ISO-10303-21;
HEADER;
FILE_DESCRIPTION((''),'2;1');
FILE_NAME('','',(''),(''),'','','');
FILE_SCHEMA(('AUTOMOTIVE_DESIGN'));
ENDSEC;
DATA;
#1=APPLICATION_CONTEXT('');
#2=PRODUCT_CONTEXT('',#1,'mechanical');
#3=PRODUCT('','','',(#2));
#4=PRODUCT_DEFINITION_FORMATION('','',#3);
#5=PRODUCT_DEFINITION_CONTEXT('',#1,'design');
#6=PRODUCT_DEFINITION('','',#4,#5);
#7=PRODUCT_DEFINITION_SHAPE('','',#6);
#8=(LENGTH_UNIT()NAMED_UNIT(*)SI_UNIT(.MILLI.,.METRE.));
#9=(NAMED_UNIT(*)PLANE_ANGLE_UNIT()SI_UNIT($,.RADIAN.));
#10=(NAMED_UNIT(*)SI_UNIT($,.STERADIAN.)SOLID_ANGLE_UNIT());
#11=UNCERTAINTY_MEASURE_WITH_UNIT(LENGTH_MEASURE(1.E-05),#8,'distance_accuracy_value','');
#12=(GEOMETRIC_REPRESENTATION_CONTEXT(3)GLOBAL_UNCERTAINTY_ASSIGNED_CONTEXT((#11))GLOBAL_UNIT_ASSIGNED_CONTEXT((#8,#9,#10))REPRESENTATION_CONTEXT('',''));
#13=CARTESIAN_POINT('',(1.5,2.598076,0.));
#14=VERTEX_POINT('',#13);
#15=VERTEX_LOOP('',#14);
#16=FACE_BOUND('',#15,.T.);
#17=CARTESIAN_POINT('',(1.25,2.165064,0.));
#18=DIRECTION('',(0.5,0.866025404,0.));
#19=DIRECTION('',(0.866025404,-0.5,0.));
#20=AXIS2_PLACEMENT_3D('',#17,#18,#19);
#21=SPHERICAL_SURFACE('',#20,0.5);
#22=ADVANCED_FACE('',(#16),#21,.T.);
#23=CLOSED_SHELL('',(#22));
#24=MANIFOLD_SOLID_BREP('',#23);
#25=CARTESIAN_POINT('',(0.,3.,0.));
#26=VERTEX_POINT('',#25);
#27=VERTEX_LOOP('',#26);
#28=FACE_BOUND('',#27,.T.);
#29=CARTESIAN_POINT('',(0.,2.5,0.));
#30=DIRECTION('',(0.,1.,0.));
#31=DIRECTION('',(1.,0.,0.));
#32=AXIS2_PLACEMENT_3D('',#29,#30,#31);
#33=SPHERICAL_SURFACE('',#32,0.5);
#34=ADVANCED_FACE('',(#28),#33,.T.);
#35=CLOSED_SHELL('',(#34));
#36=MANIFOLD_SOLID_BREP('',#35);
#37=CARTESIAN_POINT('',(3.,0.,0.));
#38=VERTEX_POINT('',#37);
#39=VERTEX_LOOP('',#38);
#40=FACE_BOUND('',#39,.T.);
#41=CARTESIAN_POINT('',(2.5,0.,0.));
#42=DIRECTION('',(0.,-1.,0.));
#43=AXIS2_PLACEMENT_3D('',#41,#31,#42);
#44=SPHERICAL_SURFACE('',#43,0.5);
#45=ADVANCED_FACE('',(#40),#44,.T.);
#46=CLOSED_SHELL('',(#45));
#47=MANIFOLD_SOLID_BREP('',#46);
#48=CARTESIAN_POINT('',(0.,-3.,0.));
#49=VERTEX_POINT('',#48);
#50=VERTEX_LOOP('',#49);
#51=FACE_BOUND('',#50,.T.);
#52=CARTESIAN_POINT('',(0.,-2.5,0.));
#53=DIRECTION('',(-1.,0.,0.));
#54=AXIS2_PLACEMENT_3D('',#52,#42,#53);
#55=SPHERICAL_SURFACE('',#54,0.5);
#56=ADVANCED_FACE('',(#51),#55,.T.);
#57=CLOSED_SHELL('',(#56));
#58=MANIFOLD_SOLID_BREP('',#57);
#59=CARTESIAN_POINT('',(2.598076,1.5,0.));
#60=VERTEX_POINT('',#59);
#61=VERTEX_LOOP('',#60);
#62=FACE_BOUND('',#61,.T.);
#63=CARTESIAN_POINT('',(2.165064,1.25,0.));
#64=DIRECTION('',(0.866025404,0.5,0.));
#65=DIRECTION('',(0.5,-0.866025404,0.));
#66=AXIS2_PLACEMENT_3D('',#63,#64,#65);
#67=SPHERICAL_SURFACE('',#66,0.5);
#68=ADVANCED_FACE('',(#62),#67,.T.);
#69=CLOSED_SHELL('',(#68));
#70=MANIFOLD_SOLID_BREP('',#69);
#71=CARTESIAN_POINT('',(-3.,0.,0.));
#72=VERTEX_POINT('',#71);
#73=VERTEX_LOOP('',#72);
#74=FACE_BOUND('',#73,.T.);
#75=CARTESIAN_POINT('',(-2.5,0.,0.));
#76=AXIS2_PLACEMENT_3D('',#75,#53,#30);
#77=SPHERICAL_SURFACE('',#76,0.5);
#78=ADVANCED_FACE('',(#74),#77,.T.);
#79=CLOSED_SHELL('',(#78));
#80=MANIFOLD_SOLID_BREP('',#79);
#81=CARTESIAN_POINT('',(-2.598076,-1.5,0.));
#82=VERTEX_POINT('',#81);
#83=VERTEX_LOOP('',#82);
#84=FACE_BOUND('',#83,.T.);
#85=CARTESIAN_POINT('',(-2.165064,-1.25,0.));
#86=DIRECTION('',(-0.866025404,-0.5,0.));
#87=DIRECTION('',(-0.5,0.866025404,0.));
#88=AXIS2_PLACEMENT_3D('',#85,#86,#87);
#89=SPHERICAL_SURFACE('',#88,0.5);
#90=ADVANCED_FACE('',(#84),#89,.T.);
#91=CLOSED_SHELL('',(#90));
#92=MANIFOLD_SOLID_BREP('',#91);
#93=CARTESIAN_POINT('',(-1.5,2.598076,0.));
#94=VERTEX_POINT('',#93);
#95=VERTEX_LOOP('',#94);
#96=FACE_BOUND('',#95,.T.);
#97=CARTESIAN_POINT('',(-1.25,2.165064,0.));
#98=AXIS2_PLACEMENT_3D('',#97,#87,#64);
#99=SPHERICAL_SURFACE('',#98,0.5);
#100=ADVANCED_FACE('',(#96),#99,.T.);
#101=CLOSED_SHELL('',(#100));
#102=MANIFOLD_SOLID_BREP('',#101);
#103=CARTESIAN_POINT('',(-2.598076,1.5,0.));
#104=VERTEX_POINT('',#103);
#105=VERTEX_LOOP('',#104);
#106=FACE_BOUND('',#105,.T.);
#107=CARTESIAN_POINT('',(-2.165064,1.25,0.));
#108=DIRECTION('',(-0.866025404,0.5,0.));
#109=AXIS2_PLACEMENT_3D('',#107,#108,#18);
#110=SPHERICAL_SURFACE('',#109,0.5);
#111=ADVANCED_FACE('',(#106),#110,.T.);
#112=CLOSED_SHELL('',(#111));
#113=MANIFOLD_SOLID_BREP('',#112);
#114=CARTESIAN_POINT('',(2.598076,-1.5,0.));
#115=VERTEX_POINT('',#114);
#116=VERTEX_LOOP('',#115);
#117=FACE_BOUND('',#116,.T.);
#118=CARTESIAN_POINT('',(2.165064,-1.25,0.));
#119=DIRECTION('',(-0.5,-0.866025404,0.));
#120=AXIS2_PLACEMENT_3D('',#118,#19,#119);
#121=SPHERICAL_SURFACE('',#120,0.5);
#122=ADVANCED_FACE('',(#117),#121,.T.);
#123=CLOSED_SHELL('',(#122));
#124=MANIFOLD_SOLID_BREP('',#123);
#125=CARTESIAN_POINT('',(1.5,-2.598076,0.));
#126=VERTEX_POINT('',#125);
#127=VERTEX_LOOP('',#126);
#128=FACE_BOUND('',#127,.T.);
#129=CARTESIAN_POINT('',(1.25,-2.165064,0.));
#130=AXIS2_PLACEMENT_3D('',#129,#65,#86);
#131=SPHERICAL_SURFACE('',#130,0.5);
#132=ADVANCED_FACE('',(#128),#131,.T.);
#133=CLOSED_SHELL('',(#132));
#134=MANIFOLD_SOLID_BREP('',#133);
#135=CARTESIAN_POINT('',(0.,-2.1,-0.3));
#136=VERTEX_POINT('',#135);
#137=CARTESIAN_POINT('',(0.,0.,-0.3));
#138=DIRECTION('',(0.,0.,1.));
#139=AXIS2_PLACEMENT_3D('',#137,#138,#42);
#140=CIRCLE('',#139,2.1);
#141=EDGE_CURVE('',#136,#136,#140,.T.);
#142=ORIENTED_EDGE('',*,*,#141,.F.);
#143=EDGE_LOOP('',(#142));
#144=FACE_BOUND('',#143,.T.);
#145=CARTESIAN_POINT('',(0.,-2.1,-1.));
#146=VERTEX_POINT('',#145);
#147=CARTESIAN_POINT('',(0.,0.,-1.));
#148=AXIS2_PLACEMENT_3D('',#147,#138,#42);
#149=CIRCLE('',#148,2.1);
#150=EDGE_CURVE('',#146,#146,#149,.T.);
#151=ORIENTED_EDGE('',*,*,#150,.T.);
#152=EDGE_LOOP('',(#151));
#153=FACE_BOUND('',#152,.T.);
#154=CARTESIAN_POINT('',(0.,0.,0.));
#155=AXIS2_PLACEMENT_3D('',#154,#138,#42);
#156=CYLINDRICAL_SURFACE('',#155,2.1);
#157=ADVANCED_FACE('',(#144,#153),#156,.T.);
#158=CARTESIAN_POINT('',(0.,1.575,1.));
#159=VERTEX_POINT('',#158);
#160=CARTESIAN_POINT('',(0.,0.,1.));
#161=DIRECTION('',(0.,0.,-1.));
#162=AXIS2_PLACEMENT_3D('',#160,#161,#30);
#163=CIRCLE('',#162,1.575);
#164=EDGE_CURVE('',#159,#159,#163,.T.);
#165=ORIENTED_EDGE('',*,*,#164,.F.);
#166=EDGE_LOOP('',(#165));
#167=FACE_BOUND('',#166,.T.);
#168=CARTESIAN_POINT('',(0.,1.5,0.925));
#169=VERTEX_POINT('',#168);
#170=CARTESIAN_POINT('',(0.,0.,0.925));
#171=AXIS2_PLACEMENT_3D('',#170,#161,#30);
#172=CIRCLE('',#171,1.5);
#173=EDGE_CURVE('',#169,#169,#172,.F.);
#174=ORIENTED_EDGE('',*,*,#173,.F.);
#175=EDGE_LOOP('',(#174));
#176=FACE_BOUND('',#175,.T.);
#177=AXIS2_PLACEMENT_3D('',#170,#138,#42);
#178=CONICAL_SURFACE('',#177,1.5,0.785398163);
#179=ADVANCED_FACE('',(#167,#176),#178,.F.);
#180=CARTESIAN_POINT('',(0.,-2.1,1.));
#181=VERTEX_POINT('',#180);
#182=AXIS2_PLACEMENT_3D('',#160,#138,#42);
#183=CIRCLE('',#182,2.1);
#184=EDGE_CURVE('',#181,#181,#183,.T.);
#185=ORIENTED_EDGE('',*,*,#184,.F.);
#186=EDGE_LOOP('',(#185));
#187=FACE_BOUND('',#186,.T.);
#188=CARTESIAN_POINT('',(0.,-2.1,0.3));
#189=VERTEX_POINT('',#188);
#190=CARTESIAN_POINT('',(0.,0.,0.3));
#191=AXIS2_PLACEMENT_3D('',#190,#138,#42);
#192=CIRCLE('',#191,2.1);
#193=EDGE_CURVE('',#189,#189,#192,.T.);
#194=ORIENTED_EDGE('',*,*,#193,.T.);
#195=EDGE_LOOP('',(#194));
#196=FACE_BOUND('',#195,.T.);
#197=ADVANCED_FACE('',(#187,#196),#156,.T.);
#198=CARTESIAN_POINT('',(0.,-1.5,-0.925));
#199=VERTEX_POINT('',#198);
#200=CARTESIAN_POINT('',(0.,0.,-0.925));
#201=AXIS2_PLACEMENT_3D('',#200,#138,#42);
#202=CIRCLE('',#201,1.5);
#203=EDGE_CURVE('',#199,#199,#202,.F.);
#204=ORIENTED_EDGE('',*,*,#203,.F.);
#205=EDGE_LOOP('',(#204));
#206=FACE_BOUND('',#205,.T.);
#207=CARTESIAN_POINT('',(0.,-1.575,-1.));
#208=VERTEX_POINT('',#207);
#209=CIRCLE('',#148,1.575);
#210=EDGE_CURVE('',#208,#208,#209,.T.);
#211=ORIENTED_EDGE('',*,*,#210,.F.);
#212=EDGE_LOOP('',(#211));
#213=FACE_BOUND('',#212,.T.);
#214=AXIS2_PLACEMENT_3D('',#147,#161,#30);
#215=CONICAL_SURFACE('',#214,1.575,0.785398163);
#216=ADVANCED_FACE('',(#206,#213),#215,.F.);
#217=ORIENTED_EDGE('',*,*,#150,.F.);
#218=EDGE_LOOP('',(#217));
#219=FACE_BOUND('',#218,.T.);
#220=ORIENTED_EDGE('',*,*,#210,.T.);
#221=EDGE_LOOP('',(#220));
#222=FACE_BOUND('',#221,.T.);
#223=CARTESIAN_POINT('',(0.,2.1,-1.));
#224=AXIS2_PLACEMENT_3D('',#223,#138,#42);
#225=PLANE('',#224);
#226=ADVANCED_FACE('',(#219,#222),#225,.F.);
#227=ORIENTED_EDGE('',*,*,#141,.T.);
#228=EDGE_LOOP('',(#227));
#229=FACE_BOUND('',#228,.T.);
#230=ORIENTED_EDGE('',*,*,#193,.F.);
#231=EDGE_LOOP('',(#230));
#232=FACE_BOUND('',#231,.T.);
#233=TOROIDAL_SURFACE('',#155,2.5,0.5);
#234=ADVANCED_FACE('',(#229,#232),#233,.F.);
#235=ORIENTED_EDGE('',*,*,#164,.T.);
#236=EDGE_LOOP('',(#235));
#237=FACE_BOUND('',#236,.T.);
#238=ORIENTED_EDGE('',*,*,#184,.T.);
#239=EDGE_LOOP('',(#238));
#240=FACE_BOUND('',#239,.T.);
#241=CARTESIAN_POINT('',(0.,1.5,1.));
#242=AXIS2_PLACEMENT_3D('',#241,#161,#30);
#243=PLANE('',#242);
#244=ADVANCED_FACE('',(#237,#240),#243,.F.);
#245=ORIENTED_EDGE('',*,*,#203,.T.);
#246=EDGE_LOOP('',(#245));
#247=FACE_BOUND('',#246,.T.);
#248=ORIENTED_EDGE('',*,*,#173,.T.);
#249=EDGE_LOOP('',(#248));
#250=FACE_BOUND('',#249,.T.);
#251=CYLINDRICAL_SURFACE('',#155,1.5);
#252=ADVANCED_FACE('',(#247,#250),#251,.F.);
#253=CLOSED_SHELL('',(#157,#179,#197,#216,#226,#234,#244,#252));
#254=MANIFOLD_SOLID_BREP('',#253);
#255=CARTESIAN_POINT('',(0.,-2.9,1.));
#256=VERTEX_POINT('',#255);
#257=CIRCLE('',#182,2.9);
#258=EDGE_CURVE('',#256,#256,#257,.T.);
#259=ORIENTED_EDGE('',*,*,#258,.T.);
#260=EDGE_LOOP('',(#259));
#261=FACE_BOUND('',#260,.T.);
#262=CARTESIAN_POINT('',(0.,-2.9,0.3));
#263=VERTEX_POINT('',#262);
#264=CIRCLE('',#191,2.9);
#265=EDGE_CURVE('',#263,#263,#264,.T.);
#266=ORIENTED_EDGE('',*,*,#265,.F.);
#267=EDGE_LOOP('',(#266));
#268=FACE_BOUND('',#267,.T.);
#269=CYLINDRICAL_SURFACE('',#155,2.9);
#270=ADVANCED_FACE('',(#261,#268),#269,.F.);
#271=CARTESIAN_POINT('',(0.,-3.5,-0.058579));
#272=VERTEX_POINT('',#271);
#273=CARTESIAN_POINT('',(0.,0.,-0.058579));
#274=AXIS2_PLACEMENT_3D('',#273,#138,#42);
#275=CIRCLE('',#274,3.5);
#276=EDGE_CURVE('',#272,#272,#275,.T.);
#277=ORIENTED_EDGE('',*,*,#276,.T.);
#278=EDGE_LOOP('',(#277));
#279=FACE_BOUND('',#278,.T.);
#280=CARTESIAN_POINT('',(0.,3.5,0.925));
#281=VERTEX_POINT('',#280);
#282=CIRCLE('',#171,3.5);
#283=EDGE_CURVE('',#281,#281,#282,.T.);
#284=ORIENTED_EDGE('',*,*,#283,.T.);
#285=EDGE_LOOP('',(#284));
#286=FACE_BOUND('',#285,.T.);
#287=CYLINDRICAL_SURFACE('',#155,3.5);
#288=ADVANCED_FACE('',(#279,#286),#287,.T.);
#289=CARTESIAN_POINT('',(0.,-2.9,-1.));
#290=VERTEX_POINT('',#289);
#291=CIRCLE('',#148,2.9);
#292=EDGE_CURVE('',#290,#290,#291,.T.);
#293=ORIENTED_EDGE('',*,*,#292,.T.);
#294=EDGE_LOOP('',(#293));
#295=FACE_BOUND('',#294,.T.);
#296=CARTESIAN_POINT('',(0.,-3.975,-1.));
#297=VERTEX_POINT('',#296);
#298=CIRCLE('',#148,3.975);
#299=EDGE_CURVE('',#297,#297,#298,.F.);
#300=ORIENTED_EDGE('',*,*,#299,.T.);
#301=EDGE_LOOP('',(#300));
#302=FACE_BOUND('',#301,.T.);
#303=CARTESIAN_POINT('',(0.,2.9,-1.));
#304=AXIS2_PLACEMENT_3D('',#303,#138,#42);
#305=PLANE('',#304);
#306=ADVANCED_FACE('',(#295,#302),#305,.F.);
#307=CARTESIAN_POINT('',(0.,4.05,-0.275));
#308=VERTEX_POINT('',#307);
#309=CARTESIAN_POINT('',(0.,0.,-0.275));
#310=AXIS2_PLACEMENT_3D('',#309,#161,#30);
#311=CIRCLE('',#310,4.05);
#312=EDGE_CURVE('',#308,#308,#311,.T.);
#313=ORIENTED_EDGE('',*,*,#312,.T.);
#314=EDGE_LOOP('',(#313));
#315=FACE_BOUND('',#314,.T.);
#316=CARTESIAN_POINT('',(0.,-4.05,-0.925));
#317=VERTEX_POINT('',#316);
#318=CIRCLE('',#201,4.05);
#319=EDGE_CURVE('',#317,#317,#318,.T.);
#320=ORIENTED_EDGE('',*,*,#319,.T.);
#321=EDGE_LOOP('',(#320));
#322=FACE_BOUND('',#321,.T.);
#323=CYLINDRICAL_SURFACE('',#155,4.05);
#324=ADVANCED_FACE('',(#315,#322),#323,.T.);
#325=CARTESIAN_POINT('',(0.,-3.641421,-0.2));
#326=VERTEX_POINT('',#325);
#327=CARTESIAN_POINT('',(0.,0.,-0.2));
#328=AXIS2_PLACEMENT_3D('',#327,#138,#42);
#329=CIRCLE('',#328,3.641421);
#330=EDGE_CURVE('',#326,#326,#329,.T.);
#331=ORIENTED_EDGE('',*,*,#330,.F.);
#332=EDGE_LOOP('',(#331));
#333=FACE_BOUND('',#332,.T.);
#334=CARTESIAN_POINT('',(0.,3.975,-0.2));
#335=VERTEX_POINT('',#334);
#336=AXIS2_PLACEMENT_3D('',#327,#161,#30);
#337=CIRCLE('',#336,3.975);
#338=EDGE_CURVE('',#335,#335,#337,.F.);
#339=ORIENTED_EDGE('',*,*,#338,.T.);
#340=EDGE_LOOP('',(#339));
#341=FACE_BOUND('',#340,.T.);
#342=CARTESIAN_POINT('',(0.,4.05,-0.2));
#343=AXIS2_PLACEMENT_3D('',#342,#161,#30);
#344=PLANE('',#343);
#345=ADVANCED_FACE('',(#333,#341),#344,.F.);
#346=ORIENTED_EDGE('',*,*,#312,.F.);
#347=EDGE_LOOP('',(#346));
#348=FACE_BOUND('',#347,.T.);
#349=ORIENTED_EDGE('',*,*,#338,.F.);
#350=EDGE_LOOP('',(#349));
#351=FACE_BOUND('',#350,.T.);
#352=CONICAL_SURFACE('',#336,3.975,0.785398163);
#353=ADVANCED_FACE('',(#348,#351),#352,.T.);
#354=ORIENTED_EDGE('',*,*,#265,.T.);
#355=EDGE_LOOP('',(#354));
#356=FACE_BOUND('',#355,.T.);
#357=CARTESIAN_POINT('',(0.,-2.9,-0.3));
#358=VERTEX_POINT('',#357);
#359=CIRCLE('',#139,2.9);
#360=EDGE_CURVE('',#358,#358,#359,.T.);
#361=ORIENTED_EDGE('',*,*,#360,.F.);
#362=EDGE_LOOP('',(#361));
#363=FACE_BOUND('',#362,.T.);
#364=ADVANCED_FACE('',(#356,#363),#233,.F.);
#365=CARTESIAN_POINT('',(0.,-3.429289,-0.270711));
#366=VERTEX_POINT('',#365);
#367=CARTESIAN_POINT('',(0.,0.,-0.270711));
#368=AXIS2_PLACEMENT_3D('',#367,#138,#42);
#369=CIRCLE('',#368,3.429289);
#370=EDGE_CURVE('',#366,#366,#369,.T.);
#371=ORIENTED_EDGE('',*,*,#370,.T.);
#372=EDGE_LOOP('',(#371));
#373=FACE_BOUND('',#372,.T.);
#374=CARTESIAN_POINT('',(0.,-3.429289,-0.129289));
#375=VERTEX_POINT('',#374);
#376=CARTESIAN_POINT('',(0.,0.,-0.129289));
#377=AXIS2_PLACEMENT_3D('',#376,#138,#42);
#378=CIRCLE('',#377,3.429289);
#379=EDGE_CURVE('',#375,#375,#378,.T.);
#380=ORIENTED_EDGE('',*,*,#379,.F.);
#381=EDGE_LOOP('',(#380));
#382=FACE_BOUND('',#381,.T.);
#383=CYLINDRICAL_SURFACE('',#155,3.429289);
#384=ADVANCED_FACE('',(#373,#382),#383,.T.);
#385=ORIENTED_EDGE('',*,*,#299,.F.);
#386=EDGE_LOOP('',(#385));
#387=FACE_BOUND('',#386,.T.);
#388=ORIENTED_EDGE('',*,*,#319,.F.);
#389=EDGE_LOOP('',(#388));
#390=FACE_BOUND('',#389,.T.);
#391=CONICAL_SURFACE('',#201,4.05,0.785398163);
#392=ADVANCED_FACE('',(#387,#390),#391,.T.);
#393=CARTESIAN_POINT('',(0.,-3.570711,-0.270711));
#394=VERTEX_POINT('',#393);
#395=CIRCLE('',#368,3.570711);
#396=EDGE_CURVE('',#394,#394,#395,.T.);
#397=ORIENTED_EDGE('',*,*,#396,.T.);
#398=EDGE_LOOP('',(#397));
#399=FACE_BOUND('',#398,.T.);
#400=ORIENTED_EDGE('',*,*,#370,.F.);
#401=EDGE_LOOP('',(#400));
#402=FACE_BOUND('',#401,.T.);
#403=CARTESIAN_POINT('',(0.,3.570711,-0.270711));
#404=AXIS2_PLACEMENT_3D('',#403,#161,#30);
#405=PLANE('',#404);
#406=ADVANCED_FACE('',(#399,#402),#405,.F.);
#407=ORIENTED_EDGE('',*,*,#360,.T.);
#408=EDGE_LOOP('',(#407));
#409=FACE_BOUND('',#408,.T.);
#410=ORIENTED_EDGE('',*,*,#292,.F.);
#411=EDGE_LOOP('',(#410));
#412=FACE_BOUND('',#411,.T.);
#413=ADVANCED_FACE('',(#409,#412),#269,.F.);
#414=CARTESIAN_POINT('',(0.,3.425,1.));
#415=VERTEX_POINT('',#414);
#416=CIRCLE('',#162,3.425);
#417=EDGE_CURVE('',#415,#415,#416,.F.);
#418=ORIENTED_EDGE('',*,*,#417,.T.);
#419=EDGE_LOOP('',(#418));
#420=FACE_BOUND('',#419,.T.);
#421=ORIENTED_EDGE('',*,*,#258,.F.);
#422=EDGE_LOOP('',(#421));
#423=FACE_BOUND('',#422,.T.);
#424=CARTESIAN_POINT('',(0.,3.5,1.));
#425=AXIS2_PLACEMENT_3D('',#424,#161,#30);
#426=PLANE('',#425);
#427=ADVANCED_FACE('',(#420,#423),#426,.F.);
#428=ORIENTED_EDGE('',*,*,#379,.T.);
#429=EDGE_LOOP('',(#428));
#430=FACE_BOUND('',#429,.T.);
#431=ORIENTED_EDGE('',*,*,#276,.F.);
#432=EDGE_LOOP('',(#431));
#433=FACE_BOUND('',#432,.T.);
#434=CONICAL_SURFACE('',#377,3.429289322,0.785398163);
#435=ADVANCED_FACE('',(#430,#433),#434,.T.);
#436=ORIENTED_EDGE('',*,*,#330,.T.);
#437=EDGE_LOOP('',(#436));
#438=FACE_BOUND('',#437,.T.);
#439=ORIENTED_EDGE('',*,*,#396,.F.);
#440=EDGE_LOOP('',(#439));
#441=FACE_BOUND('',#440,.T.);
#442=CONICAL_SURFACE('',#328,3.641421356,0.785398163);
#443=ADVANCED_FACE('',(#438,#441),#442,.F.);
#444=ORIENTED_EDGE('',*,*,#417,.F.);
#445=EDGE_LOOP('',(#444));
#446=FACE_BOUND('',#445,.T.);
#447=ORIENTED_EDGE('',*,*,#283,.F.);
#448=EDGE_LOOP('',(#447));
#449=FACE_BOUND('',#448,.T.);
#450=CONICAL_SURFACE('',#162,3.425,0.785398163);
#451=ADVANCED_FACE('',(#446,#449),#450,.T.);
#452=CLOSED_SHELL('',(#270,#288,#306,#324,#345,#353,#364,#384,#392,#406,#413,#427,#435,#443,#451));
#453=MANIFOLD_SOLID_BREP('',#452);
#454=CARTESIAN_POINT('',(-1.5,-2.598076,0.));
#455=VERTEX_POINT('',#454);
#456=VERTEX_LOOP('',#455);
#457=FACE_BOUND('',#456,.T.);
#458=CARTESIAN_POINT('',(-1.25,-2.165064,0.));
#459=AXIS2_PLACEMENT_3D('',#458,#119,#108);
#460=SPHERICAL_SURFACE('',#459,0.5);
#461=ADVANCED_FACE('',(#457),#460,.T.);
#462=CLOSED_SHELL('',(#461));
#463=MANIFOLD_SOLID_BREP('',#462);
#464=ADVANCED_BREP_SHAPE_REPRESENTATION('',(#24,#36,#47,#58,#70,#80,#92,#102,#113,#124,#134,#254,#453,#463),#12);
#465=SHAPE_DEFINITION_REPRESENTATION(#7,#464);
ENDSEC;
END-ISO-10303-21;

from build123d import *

# Parameters (mm, degrees)
FILLET1_SIZE      = 0.075
FILLET2_SIZE      = 0.075
CIRPATTERN3_COUNT = 12


with BuildPart() as part:
    # Sketch2 → Revolve1 (revolve)
    with BuildSketch(Plane(origin=(0, 0, 0), x_dir=(0, 0, -1), z_dir=(1, 0, 0))):
        with BuildLine():
            Line((1, 4.05), (0.2, 4.05))
            Line((0.2, 4.05), (0.2, 3.641421356))
            Line((0.2, 3.641421356), (0.270710678, 3.570710678))
            Line((0.270710678, 3.570710678), (0.270710678, 3.429289322))
            Line((0.270710678, 3.429289322), (0.129289322, 3.429289322))
            Line((0.129289322, 3.429289322), (0.058578644, 3.5))
            Line((0.058578644, 3.5), (-1, 3.5))
            Line((-1, 3.5), (-1, 2.9))
            Line((-1, 2.9), (-0.3, 2.9))
            ThreePointArc((-0.3, 2.9), (0, 3), (0.3, 2.9))
            Line((0.3, 2.9), (1, 2.9))
            Line((1, 2.9), (1, 4.05))
        make_face()
        with BuildLine():
            Line((1, 1.5), (-1, 1.5))
            Line((-1, 1.5), (-1, 2.1))
            Line((-1, 2.1), (-0.3, 2.1))
            ThreePointArc((-0.3, 2.1), (0, 2), (0.3, 2.1))
            Line((0.3, 2.1), (1, 2.1))
            Line((1, 2.1), (1, 1.5))
        make_face()
    revolve(axis=Axis((0, 0, 0), (0, 0, -1)))

    # Fillet1
    fillet1_edges = [part.edges().sort_by_distance(p)[0] for p in [
        (0, -4.05, -1),
        (0, -4.05, -0.2),
        (0, -3.5, 1),
    ]]
    chamfer(fillet1_edges, length=FILLET1_SIZE)

    # Fillet2
    fillet2_edges = [part.edges().sort_by_distance(p)[0] for p in [
        (0, -1.5, -1),
        (0, -1.5, 1),
    ]]
    chamfer(fillet2_edges, length=FILLET2_SIZE)


with BuildPart() as body_2:
    # Sketch7 → Revolve3 (revolve)
    with BuildSketch(Plane.XY):
        with BuildLine():
            Line((0, 3), (0, 2))
            ThreePointArc((0, 2), (-0.5, 2.5), (0, 3))
        make_face()
    revolve(axis=Axis((0, 3, 0), (0, -1, 0)))


with BuildPart() as cirpattern3_1:
    # CirPattern3: pattern copy
    add(body_2.part.rotate(Axis((0, 0, 0), (0, 0, -1)), 1 * 360 / CIRPATTERN3_COUNT))


with BuildPart() as cirpattern3_2:
    # CirPattern3: pattern copy
    add(body_2.part.rotate(Axis((0, 0, 0), (0, 0, -1)), 2 * 360 / CIRPATTERN3_COUNT))


with BuildPart() as cirpattern3_3:
    # CirPattern3: pattern copy
    add(body_2.part.rotate(Axis((0, 0, 0), (0, 0, -1)), 3 * 360 / CIRPATTERN3_COUNT))


with BuildPart() as cirpattern3_4:
    # CirPattern3: pattern copy
    add(body_2.part.rotate(Axis((0, 0, 0), (0, 0, -1)), 4 * 360 / CIRPATTERN3_COUNT))


with BuildPart() as cirpattern3_5:
    # CirPattern3: pattern copy
    add(body_2.part.rotate(Axis((0, 0, 0), (0, 0, -1)), 5 * 360 / CIRPATTERN3_COUNT))


with BuildPart() as cirpattern3_6:
    # CirPattern3: pattern copy
    add(body_2.part.rotate(Axis((0, 0, 0), (0, 0, -1)), 6 * 360 / CIRPATTERN3_COUNT))


with BuildPart() as cirpattern3_7:
    # CirPattern3: pattern copy
    add(body_2.part.rotate(Axis((0, 0, 0), (0, 0, -1)), 7 * 360 / CIRPATTERN3_COUNT))


with BuildPart() as cirpattern3_8:
    # CirPattern3: pattern copy
    add(body_2.part.rotate(Axis((0, 0, 0), (0, 0, -1)), 8 * 360 / CIRPATTERN3_COUNT))


with BuildPart() as cirpattern3_9:
    # CirPattern3: pattern copy
    add(body_2.part.rotate(Axis((0, 0, 0), (0, 0, -1)), 9 * 360 / CIRPATTERN3_COUNT))


with BuildPart() as cirpattern3_10:
    # CirPattern3: pattern copy
    add(body_2.part.rotate(Axis((0, 0, 0), (0, 0, -1)), 10 * 360 / CIRPATTERN3_COUNT))


with BuildPart() as cirpattern3_11:
    # CirPattern3: pattern copy
    add(body_2.part.rotate(Axis((0, 0, 0), (0, 0, -1)), 11 * 360 / CIRPATTERN3_COUNT))


solid = Compound([part.part, body_2.part, cirpattern3_1.part, cirpattern3_2.part, cirpattern3_3.part, cirpattern3_4.part, cirpattern3_5.part, cirpattern3_6.part, cirpattern3_7.part, cirpattern3_8.part, cirpattern3_9.part, cirpattern3_10.part, cirpattern3_11.part])
